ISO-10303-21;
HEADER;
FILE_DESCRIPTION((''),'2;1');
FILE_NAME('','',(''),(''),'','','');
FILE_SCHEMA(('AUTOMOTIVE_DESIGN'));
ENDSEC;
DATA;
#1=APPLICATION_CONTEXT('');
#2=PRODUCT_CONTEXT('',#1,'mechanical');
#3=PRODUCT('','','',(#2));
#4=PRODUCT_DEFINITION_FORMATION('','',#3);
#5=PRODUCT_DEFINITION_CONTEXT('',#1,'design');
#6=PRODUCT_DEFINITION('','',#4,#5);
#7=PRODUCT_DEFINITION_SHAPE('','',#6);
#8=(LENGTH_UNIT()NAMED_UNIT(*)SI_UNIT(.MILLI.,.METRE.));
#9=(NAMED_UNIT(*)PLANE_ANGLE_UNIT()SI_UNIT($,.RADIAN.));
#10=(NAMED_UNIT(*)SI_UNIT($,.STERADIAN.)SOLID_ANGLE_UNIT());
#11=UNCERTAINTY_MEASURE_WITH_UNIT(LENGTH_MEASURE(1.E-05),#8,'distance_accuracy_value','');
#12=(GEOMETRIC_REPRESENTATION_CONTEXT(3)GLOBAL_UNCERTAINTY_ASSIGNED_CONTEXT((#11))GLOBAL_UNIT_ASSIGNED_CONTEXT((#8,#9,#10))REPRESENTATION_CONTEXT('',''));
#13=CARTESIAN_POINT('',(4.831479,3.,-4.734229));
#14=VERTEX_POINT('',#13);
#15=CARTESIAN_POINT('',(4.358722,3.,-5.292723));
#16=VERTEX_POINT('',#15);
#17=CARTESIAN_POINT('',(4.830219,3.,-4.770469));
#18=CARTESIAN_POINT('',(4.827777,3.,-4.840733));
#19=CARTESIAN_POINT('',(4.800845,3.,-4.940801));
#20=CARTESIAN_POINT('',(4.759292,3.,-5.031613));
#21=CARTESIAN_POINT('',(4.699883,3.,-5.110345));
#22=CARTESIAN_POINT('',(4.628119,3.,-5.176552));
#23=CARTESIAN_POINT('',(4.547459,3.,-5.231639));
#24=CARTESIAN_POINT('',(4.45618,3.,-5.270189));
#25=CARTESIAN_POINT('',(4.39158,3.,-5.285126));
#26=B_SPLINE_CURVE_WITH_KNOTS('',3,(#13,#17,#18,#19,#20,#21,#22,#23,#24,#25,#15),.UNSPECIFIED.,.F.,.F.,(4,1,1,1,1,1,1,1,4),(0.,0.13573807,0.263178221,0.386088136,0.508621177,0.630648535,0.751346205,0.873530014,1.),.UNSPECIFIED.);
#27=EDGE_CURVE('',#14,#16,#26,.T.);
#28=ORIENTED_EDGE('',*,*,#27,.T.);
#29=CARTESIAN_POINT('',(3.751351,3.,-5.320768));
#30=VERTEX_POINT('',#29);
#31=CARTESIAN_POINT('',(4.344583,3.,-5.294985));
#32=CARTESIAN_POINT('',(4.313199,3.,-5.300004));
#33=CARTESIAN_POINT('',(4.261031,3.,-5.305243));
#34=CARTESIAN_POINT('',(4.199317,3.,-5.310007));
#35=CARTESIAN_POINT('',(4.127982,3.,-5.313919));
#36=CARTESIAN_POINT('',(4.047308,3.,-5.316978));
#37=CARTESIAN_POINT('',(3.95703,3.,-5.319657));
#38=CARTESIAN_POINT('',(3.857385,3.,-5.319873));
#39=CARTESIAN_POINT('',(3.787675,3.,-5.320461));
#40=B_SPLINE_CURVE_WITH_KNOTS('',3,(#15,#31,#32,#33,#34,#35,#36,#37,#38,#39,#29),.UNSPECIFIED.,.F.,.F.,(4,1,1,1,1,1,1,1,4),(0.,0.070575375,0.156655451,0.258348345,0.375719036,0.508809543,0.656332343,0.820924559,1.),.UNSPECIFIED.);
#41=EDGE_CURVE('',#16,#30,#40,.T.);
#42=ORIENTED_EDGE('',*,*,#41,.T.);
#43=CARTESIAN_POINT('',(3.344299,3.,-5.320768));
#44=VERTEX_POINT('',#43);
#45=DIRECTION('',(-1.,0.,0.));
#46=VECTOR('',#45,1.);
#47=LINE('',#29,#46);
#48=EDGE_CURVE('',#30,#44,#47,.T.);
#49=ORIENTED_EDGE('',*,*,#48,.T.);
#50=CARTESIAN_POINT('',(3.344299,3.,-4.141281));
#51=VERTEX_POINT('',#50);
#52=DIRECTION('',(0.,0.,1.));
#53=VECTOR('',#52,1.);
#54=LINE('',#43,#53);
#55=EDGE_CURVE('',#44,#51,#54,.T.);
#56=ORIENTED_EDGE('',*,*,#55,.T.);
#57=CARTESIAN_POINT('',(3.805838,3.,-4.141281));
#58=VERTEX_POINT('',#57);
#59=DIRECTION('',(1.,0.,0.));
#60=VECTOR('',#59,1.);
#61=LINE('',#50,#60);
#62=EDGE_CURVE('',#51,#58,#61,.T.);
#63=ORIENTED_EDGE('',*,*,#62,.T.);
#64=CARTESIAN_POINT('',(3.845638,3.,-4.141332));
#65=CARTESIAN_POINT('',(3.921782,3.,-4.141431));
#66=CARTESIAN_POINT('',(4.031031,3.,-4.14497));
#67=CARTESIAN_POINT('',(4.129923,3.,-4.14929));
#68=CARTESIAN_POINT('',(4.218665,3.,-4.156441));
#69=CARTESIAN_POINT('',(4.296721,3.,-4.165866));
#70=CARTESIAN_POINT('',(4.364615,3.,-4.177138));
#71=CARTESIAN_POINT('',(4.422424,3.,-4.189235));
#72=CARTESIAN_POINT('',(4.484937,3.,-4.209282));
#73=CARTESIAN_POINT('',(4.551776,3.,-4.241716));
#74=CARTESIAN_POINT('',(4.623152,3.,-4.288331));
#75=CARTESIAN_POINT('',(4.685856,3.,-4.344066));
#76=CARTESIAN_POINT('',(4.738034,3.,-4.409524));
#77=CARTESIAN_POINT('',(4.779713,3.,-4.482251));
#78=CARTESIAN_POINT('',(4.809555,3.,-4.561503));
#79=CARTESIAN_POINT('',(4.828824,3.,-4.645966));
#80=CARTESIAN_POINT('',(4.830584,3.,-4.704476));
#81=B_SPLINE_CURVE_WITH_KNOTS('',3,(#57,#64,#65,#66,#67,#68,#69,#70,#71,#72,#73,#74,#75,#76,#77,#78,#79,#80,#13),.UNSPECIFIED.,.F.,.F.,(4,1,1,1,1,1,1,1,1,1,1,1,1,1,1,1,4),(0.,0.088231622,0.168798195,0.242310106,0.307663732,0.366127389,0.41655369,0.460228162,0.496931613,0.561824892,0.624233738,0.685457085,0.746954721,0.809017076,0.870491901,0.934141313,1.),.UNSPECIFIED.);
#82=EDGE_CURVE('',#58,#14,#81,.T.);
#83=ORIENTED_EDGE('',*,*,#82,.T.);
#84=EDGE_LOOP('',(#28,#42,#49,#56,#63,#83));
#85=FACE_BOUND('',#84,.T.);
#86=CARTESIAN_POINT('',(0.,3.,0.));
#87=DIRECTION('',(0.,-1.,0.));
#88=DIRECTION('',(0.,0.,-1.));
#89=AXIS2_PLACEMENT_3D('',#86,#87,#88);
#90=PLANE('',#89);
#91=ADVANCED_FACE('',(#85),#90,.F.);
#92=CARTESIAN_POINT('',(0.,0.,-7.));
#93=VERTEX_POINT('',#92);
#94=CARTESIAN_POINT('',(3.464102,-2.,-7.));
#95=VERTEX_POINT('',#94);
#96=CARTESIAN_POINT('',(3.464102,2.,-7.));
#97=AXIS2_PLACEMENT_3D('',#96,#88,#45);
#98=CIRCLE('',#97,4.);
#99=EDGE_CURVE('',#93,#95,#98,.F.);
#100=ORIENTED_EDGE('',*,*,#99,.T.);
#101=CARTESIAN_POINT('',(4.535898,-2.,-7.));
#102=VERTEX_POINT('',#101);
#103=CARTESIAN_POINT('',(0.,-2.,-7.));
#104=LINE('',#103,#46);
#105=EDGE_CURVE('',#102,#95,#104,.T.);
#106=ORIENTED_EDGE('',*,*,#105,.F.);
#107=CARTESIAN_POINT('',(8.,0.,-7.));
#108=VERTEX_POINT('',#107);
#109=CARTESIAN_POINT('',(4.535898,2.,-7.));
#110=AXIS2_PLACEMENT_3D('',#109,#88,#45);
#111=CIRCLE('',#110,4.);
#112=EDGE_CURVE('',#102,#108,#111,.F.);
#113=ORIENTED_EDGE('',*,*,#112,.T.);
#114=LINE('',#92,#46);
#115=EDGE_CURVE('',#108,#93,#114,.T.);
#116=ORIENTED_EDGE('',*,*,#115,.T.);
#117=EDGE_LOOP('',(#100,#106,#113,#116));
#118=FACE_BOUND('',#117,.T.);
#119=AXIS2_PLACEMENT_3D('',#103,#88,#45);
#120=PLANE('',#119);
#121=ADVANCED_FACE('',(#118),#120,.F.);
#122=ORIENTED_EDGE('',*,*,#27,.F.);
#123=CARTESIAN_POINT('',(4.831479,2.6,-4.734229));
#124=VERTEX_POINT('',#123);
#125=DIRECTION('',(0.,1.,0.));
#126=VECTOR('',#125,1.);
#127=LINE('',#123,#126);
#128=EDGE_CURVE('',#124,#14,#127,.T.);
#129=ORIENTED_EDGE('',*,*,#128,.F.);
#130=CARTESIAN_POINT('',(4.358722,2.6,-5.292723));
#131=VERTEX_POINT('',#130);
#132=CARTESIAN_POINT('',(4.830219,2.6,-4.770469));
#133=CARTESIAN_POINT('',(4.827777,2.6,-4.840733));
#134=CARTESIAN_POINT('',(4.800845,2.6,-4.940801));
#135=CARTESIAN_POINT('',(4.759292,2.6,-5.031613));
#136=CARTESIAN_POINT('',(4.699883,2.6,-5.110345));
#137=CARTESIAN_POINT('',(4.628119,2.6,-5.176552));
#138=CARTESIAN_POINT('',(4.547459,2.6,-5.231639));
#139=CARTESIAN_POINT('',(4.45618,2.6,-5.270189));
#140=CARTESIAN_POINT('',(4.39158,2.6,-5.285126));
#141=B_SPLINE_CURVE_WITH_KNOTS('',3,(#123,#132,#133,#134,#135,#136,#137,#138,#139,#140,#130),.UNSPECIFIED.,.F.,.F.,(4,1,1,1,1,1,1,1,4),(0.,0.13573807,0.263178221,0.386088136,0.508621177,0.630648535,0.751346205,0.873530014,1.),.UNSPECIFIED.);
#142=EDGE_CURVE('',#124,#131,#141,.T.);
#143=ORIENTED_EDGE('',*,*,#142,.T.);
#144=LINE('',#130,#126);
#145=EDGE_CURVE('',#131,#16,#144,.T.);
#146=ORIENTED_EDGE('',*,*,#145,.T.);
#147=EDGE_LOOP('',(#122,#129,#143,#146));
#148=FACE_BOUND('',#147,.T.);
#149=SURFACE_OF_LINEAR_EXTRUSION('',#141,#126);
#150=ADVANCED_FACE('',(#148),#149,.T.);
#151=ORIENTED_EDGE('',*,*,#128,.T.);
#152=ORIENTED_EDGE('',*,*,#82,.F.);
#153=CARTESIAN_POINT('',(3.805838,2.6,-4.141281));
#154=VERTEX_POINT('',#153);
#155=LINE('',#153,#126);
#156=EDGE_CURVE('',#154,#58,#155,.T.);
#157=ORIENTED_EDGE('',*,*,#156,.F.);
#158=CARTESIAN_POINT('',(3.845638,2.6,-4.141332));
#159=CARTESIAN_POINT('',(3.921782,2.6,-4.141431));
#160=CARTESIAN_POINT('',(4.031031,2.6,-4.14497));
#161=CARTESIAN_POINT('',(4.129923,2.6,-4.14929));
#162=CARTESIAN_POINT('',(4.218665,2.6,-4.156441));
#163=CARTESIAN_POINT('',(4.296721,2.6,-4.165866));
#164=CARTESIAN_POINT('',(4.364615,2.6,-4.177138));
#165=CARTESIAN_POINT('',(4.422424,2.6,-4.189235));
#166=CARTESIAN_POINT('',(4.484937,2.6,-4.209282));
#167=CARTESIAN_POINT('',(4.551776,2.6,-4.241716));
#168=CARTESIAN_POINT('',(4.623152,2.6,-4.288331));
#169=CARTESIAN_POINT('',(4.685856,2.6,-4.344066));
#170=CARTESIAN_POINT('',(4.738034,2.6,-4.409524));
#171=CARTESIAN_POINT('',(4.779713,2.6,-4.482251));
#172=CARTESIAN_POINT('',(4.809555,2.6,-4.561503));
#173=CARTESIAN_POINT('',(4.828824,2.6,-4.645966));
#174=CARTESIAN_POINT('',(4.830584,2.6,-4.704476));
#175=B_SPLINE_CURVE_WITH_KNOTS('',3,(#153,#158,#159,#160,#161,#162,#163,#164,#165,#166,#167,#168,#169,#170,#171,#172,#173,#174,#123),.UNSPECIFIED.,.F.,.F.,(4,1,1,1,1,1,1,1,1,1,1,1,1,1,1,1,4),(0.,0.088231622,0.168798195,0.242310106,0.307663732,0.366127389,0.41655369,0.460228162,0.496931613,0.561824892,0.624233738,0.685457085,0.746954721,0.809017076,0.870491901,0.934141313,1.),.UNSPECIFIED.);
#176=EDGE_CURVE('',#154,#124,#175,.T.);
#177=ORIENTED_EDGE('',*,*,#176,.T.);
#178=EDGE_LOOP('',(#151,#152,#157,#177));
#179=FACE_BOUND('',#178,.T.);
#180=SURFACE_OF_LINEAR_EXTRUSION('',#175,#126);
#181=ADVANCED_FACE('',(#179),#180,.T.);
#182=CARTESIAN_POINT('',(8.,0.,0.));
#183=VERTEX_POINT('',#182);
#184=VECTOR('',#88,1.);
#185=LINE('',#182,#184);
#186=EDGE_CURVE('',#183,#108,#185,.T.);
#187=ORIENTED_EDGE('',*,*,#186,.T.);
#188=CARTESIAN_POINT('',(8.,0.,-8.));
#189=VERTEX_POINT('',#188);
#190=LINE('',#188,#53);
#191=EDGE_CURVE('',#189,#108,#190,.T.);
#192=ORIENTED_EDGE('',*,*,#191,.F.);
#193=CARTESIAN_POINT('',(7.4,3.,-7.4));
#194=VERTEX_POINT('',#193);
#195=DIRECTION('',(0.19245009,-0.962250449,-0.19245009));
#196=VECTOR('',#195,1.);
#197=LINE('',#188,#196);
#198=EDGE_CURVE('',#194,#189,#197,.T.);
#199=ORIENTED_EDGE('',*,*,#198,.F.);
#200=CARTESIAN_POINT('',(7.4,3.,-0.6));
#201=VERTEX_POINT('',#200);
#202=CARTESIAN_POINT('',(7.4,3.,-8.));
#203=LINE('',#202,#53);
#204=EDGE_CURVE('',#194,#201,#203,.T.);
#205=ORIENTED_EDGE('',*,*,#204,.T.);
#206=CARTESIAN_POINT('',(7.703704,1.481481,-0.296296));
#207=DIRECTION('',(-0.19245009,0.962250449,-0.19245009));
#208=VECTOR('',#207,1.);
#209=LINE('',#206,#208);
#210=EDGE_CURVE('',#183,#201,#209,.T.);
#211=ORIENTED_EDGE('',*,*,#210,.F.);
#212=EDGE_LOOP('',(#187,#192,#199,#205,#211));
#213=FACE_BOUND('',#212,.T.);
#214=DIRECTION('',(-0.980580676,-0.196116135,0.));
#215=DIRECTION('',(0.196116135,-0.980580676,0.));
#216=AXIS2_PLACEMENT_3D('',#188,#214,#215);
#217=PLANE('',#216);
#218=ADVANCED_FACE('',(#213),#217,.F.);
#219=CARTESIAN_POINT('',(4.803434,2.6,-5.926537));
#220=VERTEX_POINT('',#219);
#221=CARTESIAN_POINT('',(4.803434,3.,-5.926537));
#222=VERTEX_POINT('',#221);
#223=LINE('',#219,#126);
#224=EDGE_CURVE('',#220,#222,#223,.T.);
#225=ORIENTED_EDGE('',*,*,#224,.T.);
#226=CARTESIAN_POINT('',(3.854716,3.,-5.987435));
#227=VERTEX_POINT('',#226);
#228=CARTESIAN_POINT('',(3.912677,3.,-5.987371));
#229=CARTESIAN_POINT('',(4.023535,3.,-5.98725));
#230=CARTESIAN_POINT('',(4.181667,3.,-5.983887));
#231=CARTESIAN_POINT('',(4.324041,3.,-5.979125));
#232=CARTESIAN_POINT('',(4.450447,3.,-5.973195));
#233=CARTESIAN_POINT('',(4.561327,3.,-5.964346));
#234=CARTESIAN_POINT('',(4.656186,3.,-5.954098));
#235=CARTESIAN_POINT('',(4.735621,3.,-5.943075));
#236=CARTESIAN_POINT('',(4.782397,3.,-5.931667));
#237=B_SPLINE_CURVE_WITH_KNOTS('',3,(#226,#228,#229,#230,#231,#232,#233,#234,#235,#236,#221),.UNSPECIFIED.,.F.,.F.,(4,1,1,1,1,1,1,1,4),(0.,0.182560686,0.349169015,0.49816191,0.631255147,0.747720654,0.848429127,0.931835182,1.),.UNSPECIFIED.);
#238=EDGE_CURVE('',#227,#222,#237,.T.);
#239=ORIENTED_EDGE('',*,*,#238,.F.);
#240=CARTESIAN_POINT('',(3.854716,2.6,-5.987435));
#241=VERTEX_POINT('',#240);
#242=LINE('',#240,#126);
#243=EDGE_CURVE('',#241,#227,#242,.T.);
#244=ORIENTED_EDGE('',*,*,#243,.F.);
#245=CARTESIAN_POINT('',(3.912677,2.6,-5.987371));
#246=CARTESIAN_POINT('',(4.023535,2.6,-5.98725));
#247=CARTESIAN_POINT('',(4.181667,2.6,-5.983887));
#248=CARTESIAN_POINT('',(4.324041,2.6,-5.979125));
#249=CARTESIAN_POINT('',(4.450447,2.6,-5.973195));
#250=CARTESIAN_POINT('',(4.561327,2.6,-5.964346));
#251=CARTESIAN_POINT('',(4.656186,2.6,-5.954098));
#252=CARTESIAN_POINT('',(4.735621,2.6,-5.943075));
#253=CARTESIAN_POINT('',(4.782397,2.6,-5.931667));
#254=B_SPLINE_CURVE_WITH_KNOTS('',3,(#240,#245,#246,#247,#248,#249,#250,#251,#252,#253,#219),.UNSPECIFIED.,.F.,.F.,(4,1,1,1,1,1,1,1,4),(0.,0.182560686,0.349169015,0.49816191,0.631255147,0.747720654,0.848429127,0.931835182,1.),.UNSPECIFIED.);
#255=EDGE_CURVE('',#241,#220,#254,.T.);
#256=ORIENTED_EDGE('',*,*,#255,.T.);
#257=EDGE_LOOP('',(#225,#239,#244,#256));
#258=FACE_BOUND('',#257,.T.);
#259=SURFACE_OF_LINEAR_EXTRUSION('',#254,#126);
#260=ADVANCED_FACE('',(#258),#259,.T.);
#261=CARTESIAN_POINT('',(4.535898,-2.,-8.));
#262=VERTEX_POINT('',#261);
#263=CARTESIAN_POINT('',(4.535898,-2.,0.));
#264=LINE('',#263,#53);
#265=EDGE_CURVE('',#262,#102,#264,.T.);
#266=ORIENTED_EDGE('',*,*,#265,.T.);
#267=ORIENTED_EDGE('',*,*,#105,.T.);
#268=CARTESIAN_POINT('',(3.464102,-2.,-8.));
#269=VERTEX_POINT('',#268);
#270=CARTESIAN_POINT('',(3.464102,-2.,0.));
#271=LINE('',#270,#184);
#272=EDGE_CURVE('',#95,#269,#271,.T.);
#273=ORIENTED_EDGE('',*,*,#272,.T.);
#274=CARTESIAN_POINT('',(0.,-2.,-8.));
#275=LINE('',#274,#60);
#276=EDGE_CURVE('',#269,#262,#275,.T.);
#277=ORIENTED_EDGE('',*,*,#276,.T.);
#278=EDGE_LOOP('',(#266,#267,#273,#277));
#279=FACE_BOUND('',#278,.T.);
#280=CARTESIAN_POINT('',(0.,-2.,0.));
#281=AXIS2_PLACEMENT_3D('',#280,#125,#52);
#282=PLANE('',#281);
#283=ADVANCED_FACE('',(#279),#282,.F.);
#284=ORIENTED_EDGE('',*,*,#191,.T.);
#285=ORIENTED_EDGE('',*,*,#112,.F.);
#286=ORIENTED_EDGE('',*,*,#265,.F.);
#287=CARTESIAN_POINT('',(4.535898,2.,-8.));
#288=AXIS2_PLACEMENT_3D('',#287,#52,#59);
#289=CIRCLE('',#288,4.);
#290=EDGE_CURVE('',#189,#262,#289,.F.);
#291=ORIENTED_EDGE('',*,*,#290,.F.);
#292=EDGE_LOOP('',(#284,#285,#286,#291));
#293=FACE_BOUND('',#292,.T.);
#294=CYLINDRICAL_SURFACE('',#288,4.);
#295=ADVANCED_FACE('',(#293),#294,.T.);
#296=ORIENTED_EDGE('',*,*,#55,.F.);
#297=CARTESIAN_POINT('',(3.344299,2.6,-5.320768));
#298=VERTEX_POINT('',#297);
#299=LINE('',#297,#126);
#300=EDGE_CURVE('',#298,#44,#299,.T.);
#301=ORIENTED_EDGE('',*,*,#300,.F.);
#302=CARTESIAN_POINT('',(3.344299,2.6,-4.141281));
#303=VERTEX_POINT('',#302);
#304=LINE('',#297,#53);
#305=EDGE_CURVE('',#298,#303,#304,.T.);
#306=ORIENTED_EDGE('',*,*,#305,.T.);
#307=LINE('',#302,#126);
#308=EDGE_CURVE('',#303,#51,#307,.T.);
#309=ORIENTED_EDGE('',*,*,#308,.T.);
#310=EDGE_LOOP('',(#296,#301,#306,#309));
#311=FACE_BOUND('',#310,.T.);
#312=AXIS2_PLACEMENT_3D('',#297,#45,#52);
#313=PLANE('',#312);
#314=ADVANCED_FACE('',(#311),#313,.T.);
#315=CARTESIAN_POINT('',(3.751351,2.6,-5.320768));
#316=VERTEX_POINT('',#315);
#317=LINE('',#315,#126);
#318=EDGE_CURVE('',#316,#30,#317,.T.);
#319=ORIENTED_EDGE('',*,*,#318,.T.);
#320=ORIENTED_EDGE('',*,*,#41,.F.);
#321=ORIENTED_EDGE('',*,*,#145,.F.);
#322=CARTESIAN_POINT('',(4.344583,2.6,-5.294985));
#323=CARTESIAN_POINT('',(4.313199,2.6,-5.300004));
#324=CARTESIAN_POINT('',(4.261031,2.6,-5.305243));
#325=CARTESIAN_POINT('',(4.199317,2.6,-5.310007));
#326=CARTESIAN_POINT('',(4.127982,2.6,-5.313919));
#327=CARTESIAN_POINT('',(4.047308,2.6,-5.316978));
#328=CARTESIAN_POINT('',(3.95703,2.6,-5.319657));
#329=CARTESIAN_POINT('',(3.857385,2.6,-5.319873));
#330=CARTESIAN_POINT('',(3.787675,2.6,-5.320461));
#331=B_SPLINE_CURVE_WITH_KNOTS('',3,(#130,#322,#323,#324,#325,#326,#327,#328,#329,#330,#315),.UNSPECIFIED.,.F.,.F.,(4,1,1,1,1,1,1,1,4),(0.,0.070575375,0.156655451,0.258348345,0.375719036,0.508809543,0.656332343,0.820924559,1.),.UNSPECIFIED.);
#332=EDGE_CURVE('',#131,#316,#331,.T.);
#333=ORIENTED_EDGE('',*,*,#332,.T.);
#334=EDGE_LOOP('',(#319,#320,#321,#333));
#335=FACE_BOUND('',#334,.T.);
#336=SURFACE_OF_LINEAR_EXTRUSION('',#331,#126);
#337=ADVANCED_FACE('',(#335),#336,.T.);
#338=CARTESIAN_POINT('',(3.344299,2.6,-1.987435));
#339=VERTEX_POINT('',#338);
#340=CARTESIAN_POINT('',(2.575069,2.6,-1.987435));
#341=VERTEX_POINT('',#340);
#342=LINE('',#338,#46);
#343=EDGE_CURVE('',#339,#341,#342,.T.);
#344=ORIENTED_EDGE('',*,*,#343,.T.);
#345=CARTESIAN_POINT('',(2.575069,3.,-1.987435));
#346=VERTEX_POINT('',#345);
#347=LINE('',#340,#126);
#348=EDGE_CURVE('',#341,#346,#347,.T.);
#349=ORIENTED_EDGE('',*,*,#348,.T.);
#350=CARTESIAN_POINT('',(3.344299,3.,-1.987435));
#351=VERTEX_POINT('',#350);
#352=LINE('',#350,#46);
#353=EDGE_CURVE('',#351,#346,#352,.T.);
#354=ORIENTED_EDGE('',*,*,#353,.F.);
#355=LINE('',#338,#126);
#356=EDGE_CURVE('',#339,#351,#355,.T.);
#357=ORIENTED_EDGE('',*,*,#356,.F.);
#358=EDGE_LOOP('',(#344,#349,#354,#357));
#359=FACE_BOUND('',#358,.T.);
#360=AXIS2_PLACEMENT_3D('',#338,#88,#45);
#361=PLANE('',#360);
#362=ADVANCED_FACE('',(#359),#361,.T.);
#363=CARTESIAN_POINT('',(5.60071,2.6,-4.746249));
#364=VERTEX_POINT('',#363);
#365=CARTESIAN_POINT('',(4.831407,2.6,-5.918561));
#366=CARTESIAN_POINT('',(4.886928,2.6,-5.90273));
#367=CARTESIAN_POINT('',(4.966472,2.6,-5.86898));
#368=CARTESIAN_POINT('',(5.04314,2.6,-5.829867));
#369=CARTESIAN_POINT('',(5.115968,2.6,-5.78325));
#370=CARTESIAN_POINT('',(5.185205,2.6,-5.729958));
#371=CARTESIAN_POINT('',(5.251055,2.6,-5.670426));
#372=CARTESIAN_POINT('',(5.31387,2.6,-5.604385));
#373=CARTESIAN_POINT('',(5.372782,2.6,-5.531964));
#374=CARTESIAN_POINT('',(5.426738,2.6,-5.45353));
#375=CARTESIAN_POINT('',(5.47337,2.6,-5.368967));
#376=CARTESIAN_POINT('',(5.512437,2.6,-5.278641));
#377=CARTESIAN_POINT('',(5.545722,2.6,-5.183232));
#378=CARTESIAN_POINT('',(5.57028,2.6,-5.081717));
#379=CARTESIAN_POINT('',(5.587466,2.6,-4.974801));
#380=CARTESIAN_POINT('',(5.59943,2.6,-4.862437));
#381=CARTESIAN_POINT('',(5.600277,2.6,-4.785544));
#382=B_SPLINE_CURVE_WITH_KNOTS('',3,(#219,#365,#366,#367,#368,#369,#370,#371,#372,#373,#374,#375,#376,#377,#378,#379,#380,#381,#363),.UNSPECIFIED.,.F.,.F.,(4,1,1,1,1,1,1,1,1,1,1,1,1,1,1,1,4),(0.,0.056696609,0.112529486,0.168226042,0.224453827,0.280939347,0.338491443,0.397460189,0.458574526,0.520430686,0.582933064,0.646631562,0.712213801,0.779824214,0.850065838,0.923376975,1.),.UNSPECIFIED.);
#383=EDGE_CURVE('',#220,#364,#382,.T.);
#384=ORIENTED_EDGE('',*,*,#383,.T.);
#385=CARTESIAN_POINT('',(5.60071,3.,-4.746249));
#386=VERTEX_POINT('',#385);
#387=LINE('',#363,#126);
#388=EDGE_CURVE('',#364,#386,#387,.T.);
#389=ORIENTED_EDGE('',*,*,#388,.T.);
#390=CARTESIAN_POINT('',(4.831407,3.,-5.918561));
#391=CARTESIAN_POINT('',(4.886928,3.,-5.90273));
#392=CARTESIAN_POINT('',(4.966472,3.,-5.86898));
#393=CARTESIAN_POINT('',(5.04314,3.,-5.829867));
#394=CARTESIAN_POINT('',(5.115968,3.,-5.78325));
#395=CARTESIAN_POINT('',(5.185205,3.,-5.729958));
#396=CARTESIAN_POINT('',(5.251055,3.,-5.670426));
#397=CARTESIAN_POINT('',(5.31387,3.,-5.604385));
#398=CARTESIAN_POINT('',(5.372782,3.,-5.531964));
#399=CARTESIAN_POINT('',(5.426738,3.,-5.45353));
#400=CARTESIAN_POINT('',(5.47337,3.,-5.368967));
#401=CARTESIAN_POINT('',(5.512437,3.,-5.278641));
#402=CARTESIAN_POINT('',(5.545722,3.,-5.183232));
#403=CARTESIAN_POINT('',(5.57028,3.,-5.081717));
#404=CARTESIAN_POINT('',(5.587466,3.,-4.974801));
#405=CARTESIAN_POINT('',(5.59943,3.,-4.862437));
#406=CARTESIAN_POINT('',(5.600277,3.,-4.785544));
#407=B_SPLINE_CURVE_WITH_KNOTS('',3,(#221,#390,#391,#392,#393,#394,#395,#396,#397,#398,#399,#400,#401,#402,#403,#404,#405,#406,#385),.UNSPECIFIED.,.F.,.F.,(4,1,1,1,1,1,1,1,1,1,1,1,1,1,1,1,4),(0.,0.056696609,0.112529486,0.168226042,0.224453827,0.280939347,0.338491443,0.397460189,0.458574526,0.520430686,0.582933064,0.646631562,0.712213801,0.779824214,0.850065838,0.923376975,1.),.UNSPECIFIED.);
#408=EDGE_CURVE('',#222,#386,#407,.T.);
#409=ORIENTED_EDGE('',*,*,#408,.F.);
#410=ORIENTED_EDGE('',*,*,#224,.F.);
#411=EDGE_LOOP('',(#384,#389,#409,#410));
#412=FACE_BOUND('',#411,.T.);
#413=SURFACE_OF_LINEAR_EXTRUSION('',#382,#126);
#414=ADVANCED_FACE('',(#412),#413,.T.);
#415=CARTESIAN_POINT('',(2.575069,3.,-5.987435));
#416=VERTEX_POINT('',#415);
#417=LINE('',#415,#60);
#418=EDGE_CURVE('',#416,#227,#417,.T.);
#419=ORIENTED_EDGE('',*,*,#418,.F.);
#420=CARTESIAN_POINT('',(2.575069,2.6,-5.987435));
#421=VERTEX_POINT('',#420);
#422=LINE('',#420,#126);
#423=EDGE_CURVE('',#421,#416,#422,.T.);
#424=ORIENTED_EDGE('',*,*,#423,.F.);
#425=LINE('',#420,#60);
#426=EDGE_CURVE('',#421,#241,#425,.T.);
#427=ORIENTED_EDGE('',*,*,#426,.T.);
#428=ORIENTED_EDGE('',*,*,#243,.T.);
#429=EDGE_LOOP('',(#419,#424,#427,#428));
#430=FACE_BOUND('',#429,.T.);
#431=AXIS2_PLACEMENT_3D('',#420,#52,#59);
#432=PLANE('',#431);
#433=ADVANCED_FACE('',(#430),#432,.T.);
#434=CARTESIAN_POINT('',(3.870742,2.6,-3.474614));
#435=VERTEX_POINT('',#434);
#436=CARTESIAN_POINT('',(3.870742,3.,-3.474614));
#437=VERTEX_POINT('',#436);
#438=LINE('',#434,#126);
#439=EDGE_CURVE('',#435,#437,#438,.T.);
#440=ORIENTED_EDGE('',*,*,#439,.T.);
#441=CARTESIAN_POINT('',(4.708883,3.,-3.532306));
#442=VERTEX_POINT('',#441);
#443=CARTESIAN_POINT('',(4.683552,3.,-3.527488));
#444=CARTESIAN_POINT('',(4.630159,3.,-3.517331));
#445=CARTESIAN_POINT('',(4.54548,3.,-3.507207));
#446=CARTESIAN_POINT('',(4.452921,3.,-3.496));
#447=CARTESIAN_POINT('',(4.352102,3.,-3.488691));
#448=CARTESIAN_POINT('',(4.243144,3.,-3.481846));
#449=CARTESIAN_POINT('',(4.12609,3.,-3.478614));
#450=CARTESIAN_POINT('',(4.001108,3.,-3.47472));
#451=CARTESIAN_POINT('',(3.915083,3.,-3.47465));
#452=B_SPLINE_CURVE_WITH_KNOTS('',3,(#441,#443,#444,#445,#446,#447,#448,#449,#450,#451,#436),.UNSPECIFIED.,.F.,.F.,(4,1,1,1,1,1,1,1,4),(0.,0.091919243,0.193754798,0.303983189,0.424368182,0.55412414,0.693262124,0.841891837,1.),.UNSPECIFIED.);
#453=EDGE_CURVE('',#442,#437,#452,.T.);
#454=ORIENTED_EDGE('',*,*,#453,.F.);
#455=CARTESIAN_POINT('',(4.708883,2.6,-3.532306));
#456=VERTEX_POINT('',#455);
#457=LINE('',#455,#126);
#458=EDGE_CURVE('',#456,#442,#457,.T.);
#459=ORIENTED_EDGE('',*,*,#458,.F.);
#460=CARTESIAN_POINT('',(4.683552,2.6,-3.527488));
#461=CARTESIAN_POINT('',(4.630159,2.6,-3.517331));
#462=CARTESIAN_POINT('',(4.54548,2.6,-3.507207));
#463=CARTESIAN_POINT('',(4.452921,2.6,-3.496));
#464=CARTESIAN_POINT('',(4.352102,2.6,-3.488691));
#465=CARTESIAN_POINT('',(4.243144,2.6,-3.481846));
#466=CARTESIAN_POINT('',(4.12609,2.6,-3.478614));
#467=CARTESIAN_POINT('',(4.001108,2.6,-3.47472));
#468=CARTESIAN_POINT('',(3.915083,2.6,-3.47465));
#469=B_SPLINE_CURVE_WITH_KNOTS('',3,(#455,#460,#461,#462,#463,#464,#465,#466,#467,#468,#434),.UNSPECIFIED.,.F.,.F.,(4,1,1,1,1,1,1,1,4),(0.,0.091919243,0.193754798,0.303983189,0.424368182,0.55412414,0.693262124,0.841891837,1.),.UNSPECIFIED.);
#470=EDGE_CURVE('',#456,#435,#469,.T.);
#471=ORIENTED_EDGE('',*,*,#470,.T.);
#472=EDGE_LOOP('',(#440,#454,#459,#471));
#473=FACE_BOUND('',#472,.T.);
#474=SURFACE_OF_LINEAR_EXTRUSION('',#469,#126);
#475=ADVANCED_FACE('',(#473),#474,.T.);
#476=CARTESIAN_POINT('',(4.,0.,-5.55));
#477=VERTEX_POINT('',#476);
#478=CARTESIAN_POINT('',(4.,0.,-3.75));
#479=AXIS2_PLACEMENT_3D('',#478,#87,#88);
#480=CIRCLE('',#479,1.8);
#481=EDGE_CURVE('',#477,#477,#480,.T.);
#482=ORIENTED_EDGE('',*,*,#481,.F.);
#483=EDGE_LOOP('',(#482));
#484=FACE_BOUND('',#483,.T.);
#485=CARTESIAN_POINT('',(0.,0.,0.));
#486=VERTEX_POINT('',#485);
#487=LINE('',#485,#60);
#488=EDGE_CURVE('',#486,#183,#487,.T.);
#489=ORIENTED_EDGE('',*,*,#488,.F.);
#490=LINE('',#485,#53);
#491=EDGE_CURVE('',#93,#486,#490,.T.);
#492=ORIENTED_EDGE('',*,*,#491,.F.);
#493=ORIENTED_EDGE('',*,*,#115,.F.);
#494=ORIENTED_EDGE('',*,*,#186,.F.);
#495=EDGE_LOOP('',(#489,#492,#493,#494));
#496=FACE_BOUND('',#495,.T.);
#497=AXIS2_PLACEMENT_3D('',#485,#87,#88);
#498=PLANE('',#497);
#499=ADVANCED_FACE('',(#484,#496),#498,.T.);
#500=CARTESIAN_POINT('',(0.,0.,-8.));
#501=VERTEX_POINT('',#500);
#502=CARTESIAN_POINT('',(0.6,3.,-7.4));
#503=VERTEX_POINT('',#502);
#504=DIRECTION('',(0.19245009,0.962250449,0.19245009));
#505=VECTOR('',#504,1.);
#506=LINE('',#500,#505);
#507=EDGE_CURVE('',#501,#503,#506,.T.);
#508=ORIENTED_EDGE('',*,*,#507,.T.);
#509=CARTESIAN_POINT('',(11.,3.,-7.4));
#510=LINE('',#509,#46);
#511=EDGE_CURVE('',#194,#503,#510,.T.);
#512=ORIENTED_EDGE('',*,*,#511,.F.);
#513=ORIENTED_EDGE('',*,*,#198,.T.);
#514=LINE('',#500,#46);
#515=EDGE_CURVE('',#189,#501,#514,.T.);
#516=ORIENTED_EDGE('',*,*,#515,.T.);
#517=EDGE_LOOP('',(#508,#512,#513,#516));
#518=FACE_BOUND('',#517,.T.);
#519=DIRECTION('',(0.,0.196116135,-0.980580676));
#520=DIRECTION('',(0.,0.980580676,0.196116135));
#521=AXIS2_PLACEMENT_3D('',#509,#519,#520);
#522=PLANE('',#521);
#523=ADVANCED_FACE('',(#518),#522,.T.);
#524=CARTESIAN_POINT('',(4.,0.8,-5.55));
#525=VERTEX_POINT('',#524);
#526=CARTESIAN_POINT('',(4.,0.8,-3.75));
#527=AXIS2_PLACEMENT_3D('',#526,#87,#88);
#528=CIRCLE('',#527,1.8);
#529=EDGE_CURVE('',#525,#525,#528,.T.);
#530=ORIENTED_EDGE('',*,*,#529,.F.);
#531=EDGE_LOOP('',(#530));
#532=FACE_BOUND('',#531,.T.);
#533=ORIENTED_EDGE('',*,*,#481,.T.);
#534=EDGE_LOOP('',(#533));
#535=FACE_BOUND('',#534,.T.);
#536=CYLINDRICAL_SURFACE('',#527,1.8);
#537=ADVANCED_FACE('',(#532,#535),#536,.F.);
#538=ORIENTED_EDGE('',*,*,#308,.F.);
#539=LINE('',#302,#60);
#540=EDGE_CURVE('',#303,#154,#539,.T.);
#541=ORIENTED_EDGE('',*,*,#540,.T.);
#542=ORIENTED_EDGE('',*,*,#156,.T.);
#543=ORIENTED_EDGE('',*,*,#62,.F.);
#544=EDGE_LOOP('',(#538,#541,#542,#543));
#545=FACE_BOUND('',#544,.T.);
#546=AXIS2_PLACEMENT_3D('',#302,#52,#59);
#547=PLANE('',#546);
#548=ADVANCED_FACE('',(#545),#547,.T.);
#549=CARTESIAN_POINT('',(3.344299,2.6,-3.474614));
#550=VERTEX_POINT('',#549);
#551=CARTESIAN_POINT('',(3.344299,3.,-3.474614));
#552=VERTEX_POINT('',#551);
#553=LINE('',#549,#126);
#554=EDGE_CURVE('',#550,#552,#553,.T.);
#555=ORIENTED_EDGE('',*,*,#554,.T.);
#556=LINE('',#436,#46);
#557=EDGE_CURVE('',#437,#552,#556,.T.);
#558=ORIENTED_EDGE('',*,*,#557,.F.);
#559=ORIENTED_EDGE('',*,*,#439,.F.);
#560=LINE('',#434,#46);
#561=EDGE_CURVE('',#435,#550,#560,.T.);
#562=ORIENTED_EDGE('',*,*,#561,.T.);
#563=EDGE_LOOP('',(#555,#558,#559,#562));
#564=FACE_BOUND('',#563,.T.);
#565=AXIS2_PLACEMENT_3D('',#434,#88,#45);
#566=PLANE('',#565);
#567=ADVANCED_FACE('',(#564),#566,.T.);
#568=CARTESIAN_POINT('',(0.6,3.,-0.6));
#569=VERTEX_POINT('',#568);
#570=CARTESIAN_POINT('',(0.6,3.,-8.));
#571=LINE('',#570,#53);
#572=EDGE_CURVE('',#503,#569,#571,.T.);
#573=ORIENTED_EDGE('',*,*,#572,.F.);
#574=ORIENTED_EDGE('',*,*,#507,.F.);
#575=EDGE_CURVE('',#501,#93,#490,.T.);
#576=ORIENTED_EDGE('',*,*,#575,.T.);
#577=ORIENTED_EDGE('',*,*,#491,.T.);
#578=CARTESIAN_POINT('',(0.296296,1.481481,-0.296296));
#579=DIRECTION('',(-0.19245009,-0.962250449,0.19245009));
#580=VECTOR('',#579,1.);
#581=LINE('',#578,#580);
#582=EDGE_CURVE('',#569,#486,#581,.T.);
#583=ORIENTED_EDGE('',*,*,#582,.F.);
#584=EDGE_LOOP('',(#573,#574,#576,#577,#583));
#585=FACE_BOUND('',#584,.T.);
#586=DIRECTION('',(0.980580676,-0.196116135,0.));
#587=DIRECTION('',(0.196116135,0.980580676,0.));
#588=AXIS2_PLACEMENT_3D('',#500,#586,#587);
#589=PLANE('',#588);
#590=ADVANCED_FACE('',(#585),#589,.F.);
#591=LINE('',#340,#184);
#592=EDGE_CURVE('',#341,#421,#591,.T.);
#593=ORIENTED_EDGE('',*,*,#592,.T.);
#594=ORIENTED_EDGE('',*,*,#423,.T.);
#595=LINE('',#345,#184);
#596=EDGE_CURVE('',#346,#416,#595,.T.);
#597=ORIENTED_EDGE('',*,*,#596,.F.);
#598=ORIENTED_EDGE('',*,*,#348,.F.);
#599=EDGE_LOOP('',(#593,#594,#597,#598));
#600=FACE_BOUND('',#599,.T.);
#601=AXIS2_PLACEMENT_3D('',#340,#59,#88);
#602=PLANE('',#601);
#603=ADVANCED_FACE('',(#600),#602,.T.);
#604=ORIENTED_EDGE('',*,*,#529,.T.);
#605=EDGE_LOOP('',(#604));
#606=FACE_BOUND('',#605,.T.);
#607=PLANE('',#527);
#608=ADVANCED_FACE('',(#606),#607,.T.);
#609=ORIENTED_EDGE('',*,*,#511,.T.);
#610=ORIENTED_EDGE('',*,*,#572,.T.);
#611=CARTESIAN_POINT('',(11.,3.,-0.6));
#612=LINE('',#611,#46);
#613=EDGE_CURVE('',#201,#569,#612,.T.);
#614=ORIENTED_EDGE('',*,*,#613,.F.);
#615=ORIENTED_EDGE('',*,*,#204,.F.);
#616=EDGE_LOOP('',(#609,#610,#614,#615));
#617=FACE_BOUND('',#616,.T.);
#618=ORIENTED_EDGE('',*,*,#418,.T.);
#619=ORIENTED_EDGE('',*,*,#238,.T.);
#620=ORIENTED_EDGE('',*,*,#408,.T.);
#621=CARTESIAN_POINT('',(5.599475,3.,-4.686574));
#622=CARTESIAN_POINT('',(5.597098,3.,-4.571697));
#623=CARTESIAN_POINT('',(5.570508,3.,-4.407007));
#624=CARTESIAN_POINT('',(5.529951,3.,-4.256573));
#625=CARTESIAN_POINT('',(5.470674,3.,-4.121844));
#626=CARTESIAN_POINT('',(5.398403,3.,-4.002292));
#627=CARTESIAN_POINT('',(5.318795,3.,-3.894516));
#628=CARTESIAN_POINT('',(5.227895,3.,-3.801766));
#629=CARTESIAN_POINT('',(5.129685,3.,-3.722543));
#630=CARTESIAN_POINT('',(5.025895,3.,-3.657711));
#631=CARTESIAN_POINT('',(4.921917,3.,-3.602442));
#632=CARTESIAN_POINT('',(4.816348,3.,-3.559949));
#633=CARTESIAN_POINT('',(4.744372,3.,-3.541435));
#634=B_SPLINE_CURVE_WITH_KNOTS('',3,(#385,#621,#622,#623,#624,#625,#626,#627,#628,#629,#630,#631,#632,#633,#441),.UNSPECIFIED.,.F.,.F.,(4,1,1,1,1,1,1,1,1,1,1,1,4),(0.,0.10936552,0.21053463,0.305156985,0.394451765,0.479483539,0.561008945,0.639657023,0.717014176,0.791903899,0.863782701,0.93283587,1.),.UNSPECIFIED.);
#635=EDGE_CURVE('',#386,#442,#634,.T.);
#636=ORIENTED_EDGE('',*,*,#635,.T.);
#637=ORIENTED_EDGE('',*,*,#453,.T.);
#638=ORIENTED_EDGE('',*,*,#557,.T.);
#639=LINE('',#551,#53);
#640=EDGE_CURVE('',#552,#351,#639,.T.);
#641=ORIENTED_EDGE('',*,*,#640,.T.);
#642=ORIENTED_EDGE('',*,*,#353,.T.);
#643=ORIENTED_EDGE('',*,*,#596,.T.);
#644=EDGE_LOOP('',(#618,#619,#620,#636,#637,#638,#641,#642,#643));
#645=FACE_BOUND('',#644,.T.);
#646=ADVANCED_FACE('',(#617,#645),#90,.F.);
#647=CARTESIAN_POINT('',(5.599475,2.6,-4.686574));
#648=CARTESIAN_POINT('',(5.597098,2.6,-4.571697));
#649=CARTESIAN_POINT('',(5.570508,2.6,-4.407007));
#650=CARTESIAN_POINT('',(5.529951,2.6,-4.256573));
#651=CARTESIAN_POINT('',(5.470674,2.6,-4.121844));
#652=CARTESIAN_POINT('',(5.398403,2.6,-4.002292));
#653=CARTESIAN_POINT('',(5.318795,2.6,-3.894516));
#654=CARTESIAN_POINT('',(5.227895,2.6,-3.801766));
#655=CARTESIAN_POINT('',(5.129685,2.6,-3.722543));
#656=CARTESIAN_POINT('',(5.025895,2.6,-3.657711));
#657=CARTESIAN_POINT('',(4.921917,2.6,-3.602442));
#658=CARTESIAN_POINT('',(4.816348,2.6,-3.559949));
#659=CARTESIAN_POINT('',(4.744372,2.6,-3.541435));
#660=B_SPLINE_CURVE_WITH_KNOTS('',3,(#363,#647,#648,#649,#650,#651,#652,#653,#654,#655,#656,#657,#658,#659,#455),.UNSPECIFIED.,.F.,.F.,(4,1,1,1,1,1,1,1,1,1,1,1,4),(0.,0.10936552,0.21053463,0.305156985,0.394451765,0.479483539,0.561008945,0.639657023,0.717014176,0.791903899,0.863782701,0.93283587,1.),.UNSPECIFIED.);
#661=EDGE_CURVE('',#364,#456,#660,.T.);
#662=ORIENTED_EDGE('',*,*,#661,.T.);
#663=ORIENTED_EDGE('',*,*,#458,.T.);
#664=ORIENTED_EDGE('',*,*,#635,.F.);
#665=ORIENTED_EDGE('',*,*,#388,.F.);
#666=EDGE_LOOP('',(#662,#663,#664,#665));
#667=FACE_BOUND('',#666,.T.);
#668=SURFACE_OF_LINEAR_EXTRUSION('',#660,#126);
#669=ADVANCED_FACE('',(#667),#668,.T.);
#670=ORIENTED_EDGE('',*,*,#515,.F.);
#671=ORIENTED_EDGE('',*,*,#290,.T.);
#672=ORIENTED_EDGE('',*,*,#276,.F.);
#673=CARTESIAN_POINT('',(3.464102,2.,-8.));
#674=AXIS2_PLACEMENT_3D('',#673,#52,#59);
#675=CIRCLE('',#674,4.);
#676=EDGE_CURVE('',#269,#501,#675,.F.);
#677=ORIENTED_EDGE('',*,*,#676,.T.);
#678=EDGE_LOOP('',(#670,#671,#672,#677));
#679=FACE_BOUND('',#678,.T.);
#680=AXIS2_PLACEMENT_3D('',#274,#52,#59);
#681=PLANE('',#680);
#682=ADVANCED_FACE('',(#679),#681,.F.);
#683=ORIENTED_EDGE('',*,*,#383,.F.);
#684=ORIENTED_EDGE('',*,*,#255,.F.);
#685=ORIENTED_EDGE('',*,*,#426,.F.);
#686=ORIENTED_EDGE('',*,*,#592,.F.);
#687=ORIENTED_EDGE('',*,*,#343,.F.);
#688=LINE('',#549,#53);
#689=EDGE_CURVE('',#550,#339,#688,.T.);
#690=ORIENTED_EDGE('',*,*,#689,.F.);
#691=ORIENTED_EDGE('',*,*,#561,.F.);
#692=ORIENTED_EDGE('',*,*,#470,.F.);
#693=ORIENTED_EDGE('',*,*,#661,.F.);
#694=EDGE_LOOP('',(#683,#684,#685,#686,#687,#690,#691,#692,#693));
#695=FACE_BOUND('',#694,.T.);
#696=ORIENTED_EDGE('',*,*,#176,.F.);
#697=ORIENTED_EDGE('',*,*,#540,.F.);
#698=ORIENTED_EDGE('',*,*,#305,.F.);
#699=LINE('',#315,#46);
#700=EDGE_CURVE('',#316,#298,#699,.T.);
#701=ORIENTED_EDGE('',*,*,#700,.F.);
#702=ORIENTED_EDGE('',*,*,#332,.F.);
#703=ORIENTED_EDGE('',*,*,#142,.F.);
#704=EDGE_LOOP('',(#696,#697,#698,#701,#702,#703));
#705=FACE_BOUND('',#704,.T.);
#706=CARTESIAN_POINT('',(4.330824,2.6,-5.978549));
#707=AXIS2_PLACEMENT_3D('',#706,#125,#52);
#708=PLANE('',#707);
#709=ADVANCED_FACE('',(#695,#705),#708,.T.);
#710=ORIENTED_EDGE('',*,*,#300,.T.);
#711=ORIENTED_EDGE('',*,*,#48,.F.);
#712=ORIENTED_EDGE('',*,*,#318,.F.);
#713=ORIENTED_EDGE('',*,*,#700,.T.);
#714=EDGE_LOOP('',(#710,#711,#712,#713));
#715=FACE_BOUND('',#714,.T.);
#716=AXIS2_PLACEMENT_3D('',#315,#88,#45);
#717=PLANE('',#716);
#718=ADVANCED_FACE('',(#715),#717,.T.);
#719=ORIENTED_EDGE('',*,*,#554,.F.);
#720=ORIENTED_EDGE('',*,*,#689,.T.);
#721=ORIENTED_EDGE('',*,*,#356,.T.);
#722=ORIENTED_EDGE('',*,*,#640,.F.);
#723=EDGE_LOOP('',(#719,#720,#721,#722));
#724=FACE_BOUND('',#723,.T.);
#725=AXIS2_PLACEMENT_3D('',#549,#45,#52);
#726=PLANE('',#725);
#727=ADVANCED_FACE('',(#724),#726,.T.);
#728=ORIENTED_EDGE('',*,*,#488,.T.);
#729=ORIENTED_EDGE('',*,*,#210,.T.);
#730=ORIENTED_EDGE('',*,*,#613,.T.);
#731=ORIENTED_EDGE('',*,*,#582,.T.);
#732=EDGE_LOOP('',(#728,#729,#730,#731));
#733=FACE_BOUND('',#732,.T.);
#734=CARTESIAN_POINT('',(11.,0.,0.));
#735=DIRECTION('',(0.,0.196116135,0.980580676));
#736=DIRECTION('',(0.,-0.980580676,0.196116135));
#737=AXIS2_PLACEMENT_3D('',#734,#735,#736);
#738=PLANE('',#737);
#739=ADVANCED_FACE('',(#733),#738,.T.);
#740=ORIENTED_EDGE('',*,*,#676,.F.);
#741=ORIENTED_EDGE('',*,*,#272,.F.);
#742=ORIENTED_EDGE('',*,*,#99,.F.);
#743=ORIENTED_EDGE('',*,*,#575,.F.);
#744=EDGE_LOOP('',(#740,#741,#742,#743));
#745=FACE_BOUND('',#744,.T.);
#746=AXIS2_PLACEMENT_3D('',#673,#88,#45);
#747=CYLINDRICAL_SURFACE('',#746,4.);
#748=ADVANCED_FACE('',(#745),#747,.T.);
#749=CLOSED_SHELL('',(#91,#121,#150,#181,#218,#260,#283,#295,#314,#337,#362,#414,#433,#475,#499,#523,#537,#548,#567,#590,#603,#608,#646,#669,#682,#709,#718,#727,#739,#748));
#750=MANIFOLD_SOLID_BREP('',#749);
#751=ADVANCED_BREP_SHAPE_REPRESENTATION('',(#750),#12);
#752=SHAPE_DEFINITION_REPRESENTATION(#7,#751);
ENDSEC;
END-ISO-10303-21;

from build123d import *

# Parameters (mm, degrees)
SKETCH1_W               = 8
SKETCH1_H               = 8
BOSS_EXTRUDE1_DEPTH     = 3
CUT_EXTRUDE1_DEPTH      = 12.704699911
CUT_EXTRUDE1_DEPTH_BACK = 12.704699911
CUT_EXTRUDE2_DEPTH      = 11
SKETCH4_R               = 1.8
CUT_EXTRUDE3_DEPTH      = 0.8
SKETCH5_W               = 8
SKETCH5_H               = 1
BOSS_EXTRUDE2_DEPTH     = 2
FILLET1_R               = 4
CUT_EXTRUDE4_DEPTH      = 0.4


with BuildPart() as part:
    # Sketch1 → Boss-Extrude1 (new body)
    with BuildSketch(Plane(origin=(0, 0, 0), x_dir=(1, 0, 0), z_dir=(0, 1, 0))):
        with Locations((4, 4)):
            Rectangle(SKETCH1_W, SKETCH1_H)
    extrude(amount=BOSS_EXTRUDE1_DEPTH)

    # Sketch2 → Cut-Extrude1 (cut, two sides: drawn at the far end of the back side and taken through both)
    with BuildSketch(Plane.XY.offset(-CUT_EXTRUDE1_DEPTH_BACK)):
        Polygon((0, 0), (0.6, 3), (0, 3), align=None)
        Polygon((8, 0), (7.4, 3), (8, 3), align=None)
    extrude(amount=CUT_EXTRUDE1_DEPTH + CUT_EXTRUDE1_DEPTH_BACK, mode=Mode.SUBTRACT)

    # Sketch3 → Cut-Extrude2 (cut)
    with BuildSketch(Plane(origin=(0, 0, 0), x_dir=(0, 0, -1), z_dir=(1, 0, 0))):
        Polygon((0, 0), (0.6, 3), (0, 3), align=None)
        Polygon((8, 3), (7.4, 3), (8, 0), align=None)
    extrude(amount=CUT_EXTRUDE2_DEPTH, mode=Mode.SUBTRACT)

    # Sketch4 → Cut-Extrude3 (cut)
    with BuildSketch(Plane.XZ):
        with Locations(Location((4, -3.75, 0), (0, 0, 270))):
            Circle(SKETCH4_R)
    extrude(amount=-CUT_EXTRUDE3_DEPTH, mode=Mode.SUBTRACT)

    # Sketch5 → Boss-Extrude2 (add)
    with BuildSketch(Plane.XZ):
        with Locations((4, -7.5)):
            Rectangle(SKETCH5_W, SKETCH5_H)
    extrude(amount=BOSS_EXTRUDE2_DEPTH)

    # Fillet1
    # the kernel refuses this fillet: 4 mm, written as the material it takes off along each edge
    with BuildSketch(Plane(origin=(8, -2, -16.660254038), x_dir=(0, 1, 0), z_dir=(0, 0, 1)), Plane(origin=(0, -2, 1.660254038), x_dir=(0, 1, 0), z_dir=(0, 0, -1))) as fillet1_piece_1:
        with BuildLine():
            CenterArc((4, 3.464101615), FILLET1_R, 180, 60)
            Line((0, 3.464101615), (-0.08, 3.464101615))
            Line((-0.08, 3.464101615), (-0.08, 0))
            Line((-0.08, 0), (0, -0.08))
            ThreePointArc((0, -0.08), (1, -0.08), (1.96, -0.069282032))
            Line((1.96, -0.069282032), (2, 0))
        make_face()
    extrude(amount=18.320508076, mode=Mode.SUBTRACT)

    # Sketch6 → Cut-Extrude4 (cut)
    with BuildSketch(Plane(origin=(0, 3, 0), x_dir=(1, 0, 0), z_dir=(0, 1, 0))):
        with BuildLine():
            Line((2.575068598, 1.987434605), (2.575068598, 5.987434605))
            Line((2.575068598, 5.987434605), (3.854716034, 5.987434605))
            add(Edge.make_bspline(
                [(3.854716034, 5.987434605), (3.91267733, 5.987371309), (4.0235352, 5.987250247), (4.181667245, 5.983886636), (4.324041461, 5.979125075), (4.450446542, 5.973194752), (4.561327274, 5.964345571), (4.656186257, 5.954098352), (4.735620814, 5.943075064), (4.782397472, 5.931667436), (4.803433983, 5.926537169)],
                knots=[0, 0, 0, 0, 1.460485487, 2.793352117, 3.985295279, 5.050041172, 5.981765236, 6.787433016, 7.454681457, 8, 8, 8, 8], degree=3))
            add(Edge.make_bspline(
                [(4.803433983, 5.926537169), (4.831407427, 5.918560862), (4.886928159, 5.902729762), (4.966472056, 5.868980371), (5.043139776, 5.829866627), (5.115968073, 5.783250114), (5.185204512, 5.72995844), (5.251054895, 5.670426205), (5.313870394, 5.604384669), (5.372782037, 5.531964292), (5.426738172, 5.453530256), (5.473369829, 5.368966598), (5.512437408, 5.278640875), (5.545722335, 5.183231873), (5.570280113, 5.081716653), (5.587466094, 4.974800554), (5.59942968, 4.862436815), (5.600276739, 4.785544235), (5.600709624, 4.746248708)],
                knots=[0, 0, 0, 0, 0.907145743, 1.80047177, 2.69161667, 3.591261238, 4.495029544, 5.415863088, 6.359363025, 7.337192411, 8.326890979, 9.326929023, 10.346104993, 11.395420813, 12.477187422, 13.601053412, 14.774031606, 16, 16, 16, 16], degree=3))
            add(Edge.make_bspline(
                [(5.600709624, 4.746248708), (5.599475039, 4.686573982), (5.597098394, 4.571696857), (5.570507962, 4.407006575), (5.529951011, 4.256572619), (5.470674098, 4.121843981), (5.398403226, 4.002291963), (5.318795373, 3.894516382), (5.227894903, 3.801765706), (5.129684965, 3.722543108), (5.025895009, 3.65771062), (4.921917172, 3.602441845), (4.816348426, 3.559949444), (4.744371889, 3.541435164), (4.708882701, 3.5323064)],
                knots=[0, 0, 0, 0, 1.312386234, 2.526415563, 3.661883817, 4.733421185, 5.753802465, 6.732107337, 7.675884281, 8.604170108, 9.50284679, 10.365392406, 11.194030444, 12, 12, 12, 12], degree=3))
            add(Edge.make_bspline(
                [(4.708882701, 3.5323064), (4.683552258, 3.527487955), (4.630158709, 3.517331247), (4.545479732, 3.507206857), (4.452921022, 3.496000262), (4.352101878, 3.488690691), (4.243144264, 3.481845584), (4.126090489, 3.478613784), (4.001107836, 3.47472012), (3.91508314, 3.474650156), (3.870741675, 3.474614092)],
                knots=[0, 0, 0, 0, 0.735353946, 1.55003838, 2.431865514, 3.394945452, 4.432993119, 5.54609699, 6.735134699, 8, 8, 8, 8], degree=3))
            Line((3.870741675, 3.474614092), (3.344299367, 3.474614092))
            Line((3.344299367, 3.474614092), (3.344299367, 1.987434605))
            Line((3.344299367, 1.987434605), (2.575068598, 1.987434605))
        make_face()
        with BuildLine():
            Line((3.344299367, 5.320767939), (3.344299367, 4.141280759))
            Line((3.344299367, 4.141280759), (3.805837829, 4.141280759))
            add(Edge.make_bspline(
                [(3.805837829, 4.141280759), (3.845638333, 4.141332297), (3.921781705, 4.141430897), (4.031030553, 4.144970031), (4.129922714, 4.149290201), (4.218664819, 4.156440966), (4.296721198, 4.165865503), (4.364614575, 4.177138437), (4.422424078, 4.189235472), (4.484937186, 4.209282199), (4.551776196, 4.241715975), (4.623152404, 4.288331456), (4.685856319, 4.344065763), (4.738034287, 4.409523776), (4.779712931, 4.482251421), (4.809554871, 4.56150336), (4.828823783, 4.645966113), (4.830583823, 4.704475652), (4.831478855, 4.734229477)],
                knots=[0, 0, 0, 0, 1.411705958, 2.700771114, 3.876961699, 4.922619712, 5.858038221, 6.66485904, 7.363650596, 7.950905807, 8.989198271, 9.987739806, 10.967313358, 11.951275539, 12.944273208, 13.927870418, 14.946261014, 16, 16, 16, 16], degree=3))
            add(Edge.make_bspline(
                [(4.831478855, 4.734229477), (4.830219195, 4.770469172), (4.827776882, 4.840733161), (4.800844983, 4.940800809), (4.759292142, 5.031613413), (4.699883375, 5.110345382), (4.628118983, 5.176552494), (4.547458802, 5.231639165), (4.456180297, 5.270189236), (4.391579581, 5.285125966), (4.358722444, 5.292723067)],
                knots=[0, 0, 0, 0, 1.085904563, 2.105425768, 3.088705091, 4.068969419, 5.045188284, 6.010769642, 6.988240112, 8, 8, 8, 8], degree=3))
            add(Edge.make_bspline(
                [(4.358722444, 5.292723067), (4.344583268, 5.294984513), (4.31319868, 5.300004222), (4.261031108, 5.305242912), (4.199316862, 5.310007496), (4.127981551, 5.313919362), (4.047307931, 5.316977535), (3.957029905, 5.319657249), (3.857385235, 5.319872528), (3.787674783, 5.320461199), (3.751350649, 5.320767939)],
                knots=[0, 0, 0, 0, 0.564603001, 1.253243608, 2.066786758, 3.005752288, 4.070476343, 5.250658742, 6.567396469, 8, 8, 8, 8], degree=3))
            Line((3.751350649, 5.320767939), (3.344299367, 5.320767939))
        make_face(mode=Mode.SUBTRACT)
    extrude(amount=-CUT_EXTRUDE4_DEPTH, mode=Mode.SUBTRACT)


solid = part.part
